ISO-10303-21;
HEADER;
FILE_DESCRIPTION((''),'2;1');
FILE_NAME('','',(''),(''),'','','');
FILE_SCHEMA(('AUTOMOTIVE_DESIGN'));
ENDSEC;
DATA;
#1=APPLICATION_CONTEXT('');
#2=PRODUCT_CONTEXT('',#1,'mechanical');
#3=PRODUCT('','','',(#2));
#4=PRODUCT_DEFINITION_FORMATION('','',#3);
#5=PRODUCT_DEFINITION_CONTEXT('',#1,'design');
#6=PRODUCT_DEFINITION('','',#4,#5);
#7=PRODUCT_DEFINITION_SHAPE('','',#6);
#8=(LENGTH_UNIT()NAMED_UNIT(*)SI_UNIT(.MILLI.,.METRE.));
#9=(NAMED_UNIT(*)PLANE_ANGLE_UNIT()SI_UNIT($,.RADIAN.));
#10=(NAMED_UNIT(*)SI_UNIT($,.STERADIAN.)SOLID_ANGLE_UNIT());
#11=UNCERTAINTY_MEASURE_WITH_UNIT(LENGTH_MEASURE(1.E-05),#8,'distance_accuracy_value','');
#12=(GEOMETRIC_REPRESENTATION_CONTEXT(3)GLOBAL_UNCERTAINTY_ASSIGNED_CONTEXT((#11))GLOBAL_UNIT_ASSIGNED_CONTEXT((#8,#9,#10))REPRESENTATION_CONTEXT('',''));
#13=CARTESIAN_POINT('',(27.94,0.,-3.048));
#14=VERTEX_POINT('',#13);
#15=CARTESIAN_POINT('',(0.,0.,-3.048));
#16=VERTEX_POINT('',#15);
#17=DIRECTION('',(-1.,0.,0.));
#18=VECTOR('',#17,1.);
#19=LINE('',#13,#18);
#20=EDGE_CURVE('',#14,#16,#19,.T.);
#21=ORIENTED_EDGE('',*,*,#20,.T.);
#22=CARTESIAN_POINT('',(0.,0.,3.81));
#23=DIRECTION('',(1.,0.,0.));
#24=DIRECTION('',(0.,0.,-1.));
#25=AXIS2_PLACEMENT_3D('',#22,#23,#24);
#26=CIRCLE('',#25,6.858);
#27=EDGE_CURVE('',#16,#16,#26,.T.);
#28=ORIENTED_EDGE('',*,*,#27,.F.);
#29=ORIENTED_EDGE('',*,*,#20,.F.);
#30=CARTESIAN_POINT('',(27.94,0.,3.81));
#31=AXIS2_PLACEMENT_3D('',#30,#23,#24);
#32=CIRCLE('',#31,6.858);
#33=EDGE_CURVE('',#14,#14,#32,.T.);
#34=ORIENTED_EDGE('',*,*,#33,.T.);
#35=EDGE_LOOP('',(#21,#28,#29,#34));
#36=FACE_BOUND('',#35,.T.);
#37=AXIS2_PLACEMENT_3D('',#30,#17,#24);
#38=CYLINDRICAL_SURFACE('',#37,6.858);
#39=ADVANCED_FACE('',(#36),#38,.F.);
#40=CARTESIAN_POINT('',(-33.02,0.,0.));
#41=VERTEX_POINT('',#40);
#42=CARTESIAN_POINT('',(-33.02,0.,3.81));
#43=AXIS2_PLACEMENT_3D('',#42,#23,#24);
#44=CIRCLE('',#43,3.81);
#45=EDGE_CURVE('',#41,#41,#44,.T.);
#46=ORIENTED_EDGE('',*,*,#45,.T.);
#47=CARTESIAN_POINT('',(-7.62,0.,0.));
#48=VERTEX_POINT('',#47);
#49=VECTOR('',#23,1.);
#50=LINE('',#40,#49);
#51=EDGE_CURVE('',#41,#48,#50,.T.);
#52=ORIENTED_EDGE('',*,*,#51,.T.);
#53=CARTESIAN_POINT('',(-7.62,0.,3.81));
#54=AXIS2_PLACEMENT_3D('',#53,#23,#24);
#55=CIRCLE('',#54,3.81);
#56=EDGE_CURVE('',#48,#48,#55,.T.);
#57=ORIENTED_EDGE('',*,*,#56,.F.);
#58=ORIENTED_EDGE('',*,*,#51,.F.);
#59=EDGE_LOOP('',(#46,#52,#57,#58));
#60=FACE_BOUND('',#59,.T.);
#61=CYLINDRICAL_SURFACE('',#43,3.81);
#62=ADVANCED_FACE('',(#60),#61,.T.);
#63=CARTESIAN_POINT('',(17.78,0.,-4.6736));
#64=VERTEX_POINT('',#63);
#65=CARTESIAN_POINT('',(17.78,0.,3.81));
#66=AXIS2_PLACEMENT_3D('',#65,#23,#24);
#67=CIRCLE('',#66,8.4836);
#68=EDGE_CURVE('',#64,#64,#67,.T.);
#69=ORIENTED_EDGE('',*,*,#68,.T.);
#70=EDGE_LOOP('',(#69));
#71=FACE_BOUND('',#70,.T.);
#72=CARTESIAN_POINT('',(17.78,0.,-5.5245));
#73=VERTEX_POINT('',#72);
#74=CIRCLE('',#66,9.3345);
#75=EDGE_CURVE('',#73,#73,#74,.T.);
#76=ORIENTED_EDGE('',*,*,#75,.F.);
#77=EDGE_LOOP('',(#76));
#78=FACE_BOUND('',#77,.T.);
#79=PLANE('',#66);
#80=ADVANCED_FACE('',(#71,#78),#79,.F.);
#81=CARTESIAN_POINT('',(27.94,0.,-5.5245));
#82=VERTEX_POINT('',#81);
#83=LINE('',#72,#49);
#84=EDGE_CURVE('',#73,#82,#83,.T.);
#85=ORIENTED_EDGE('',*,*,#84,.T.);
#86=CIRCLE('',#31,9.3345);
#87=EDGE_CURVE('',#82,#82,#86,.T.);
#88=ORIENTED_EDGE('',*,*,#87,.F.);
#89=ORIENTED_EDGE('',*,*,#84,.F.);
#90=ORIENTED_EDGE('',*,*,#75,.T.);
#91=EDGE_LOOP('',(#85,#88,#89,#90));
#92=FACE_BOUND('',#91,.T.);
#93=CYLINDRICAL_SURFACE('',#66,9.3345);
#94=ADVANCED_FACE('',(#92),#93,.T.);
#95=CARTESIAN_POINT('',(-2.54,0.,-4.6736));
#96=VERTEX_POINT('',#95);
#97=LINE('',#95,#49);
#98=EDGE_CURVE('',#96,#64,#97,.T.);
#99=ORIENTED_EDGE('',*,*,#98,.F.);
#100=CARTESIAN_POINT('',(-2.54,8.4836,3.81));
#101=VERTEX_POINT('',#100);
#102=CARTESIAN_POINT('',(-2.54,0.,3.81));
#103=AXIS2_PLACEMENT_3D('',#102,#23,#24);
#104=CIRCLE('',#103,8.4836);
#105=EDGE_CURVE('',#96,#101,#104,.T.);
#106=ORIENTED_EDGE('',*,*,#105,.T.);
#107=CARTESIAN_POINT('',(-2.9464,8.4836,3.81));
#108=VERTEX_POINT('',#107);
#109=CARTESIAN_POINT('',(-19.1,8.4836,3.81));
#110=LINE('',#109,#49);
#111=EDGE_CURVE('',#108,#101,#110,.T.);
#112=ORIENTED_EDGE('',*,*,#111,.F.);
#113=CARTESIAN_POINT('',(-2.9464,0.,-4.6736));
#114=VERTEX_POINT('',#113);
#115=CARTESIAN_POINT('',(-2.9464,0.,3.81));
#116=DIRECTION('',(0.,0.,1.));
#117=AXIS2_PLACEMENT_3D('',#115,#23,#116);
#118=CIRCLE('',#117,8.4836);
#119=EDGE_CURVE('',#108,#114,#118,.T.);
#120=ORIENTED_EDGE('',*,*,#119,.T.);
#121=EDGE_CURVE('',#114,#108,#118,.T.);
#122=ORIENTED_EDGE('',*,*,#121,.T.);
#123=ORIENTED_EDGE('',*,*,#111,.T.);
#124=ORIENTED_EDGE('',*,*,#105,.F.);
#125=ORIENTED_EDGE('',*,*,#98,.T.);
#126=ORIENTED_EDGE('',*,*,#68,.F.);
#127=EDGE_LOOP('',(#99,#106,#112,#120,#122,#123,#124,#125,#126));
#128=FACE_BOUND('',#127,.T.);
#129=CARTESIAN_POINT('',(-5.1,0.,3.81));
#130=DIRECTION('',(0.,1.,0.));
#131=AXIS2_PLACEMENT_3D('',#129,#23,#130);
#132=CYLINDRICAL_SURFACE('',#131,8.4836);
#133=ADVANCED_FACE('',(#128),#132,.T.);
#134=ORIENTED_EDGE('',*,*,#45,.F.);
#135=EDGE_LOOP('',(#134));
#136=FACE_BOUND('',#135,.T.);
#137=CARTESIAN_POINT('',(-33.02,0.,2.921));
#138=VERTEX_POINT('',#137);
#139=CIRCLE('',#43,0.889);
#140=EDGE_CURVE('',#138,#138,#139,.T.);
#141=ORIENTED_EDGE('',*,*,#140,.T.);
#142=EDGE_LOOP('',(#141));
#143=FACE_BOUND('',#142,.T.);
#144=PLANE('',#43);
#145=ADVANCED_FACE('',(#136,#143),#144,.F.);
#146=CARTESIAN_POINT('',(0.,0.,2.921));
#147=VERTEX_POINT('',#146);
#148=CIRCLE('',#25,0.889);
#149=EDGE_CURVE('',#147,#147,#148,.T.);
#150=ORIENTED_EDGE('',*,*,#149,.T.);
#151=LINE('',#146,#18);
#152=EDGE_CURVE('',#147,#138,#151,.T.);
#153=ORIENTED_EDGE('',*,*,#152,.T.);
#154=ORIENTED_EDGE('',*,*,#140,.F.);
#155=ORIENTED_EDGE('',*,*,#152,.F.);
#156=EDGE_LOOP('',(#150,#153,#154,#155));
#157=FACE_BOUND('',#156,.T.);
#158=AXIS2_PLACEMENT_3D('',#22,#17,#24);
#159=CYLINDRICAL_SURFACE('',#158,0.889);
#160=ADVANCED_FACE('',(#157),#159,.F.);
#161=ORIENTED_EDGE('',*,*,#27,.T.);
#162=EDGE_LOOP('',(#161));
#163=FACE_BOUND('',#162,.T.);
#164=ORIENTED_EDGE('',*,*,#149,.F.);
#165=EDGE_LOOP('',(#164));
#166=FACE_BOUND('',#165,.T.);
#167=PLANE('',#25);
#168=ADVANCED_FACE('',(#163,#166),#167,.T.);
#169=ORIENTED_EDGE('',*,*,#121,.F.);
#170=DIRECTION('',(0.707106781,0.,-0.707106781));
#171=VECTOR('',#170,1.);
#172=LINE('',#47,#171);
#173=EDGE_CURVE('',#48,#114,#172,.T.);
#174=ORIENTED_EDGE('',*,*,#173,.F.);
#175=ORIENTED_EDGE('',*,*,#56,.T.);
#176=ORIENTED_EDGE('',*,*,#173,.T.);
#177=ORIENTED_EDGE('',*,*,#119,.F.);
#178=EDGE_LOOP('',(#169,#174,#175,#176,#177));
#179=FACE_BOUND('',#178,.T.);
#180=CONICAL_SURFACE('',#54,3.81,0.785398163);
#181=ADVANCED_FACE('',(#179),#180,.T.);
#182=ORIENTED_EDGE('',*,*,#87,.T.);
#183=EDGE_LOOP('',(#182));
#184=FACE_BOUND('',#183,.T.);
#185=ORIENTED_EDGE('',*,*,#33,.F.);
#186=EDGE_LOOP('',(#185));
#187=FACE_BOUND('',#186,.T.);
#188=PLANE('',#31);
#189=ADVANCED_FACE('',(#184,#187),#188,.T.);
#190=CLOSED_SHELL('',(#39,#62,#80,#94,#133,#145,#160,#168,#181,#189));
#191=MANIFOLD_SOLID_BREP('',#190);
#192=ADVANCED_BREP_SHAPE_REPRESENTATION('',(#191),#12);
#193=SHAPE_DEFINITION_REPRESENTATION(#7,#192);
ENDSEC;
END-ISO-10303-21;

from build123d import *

# Parameters (mm, degrees)
F2_S5_R     = 8.4836
F2_T6_DEPTH = 14


# Not quite as in the source:
# - a fillet or chamfer that OpenCascade refuses, or shapes differently, is made with other operations: its cross-section is extruded or revolved along the edge and cut away or added


with BuildPart() as f1:
    # F0 (on Front) → F1 (revolve)
    with BuildSketch(Plane.XZ):
        Polygon((-33.02, 0), (-2.54, 0), (-2.54, -4.6736), (17.78, -4.6736), (17.78, -5.5245), (27.94, -5.5245), (27.94, -3.048), (0, -3.048), (0, 2.921), (-33.02, 2.921), align=None)
    revolve(axis=Axis((-5.3856544969, 0, 3.81), (1, 0, 0)))

    # F2: chamfer of 5.08 on 1 edges, made by hand


with BuildPart() as f2_tool2:
    # F2_s3 → F2_t4 (revolve)
    with BuildSketch(Plane.XZ):
        Polygon((-7.62, 0), (-2.54, -5.08), (-2.54, 0), align=None)
    revolve(axis=Axis((-2.54, 0, 3.81), (1, 0, 0)))

    # F2_s5 → F2_t6 (intersect, symmetric)
    with BuildSketch(Plane.YZ.offset(-5.1)):
        with Locations((0, 3.81)):
            Circle(F2_S5_R)
    extrude(amount=F2_T6_DEPTH, both=True, mode=Mode.INTERSECT)


with BuildPart() as f1_1:
    add(f1.part)

    # F2_t1: union F2_tool2
    add(f2_tool2.part)


solid = f1_1.part
